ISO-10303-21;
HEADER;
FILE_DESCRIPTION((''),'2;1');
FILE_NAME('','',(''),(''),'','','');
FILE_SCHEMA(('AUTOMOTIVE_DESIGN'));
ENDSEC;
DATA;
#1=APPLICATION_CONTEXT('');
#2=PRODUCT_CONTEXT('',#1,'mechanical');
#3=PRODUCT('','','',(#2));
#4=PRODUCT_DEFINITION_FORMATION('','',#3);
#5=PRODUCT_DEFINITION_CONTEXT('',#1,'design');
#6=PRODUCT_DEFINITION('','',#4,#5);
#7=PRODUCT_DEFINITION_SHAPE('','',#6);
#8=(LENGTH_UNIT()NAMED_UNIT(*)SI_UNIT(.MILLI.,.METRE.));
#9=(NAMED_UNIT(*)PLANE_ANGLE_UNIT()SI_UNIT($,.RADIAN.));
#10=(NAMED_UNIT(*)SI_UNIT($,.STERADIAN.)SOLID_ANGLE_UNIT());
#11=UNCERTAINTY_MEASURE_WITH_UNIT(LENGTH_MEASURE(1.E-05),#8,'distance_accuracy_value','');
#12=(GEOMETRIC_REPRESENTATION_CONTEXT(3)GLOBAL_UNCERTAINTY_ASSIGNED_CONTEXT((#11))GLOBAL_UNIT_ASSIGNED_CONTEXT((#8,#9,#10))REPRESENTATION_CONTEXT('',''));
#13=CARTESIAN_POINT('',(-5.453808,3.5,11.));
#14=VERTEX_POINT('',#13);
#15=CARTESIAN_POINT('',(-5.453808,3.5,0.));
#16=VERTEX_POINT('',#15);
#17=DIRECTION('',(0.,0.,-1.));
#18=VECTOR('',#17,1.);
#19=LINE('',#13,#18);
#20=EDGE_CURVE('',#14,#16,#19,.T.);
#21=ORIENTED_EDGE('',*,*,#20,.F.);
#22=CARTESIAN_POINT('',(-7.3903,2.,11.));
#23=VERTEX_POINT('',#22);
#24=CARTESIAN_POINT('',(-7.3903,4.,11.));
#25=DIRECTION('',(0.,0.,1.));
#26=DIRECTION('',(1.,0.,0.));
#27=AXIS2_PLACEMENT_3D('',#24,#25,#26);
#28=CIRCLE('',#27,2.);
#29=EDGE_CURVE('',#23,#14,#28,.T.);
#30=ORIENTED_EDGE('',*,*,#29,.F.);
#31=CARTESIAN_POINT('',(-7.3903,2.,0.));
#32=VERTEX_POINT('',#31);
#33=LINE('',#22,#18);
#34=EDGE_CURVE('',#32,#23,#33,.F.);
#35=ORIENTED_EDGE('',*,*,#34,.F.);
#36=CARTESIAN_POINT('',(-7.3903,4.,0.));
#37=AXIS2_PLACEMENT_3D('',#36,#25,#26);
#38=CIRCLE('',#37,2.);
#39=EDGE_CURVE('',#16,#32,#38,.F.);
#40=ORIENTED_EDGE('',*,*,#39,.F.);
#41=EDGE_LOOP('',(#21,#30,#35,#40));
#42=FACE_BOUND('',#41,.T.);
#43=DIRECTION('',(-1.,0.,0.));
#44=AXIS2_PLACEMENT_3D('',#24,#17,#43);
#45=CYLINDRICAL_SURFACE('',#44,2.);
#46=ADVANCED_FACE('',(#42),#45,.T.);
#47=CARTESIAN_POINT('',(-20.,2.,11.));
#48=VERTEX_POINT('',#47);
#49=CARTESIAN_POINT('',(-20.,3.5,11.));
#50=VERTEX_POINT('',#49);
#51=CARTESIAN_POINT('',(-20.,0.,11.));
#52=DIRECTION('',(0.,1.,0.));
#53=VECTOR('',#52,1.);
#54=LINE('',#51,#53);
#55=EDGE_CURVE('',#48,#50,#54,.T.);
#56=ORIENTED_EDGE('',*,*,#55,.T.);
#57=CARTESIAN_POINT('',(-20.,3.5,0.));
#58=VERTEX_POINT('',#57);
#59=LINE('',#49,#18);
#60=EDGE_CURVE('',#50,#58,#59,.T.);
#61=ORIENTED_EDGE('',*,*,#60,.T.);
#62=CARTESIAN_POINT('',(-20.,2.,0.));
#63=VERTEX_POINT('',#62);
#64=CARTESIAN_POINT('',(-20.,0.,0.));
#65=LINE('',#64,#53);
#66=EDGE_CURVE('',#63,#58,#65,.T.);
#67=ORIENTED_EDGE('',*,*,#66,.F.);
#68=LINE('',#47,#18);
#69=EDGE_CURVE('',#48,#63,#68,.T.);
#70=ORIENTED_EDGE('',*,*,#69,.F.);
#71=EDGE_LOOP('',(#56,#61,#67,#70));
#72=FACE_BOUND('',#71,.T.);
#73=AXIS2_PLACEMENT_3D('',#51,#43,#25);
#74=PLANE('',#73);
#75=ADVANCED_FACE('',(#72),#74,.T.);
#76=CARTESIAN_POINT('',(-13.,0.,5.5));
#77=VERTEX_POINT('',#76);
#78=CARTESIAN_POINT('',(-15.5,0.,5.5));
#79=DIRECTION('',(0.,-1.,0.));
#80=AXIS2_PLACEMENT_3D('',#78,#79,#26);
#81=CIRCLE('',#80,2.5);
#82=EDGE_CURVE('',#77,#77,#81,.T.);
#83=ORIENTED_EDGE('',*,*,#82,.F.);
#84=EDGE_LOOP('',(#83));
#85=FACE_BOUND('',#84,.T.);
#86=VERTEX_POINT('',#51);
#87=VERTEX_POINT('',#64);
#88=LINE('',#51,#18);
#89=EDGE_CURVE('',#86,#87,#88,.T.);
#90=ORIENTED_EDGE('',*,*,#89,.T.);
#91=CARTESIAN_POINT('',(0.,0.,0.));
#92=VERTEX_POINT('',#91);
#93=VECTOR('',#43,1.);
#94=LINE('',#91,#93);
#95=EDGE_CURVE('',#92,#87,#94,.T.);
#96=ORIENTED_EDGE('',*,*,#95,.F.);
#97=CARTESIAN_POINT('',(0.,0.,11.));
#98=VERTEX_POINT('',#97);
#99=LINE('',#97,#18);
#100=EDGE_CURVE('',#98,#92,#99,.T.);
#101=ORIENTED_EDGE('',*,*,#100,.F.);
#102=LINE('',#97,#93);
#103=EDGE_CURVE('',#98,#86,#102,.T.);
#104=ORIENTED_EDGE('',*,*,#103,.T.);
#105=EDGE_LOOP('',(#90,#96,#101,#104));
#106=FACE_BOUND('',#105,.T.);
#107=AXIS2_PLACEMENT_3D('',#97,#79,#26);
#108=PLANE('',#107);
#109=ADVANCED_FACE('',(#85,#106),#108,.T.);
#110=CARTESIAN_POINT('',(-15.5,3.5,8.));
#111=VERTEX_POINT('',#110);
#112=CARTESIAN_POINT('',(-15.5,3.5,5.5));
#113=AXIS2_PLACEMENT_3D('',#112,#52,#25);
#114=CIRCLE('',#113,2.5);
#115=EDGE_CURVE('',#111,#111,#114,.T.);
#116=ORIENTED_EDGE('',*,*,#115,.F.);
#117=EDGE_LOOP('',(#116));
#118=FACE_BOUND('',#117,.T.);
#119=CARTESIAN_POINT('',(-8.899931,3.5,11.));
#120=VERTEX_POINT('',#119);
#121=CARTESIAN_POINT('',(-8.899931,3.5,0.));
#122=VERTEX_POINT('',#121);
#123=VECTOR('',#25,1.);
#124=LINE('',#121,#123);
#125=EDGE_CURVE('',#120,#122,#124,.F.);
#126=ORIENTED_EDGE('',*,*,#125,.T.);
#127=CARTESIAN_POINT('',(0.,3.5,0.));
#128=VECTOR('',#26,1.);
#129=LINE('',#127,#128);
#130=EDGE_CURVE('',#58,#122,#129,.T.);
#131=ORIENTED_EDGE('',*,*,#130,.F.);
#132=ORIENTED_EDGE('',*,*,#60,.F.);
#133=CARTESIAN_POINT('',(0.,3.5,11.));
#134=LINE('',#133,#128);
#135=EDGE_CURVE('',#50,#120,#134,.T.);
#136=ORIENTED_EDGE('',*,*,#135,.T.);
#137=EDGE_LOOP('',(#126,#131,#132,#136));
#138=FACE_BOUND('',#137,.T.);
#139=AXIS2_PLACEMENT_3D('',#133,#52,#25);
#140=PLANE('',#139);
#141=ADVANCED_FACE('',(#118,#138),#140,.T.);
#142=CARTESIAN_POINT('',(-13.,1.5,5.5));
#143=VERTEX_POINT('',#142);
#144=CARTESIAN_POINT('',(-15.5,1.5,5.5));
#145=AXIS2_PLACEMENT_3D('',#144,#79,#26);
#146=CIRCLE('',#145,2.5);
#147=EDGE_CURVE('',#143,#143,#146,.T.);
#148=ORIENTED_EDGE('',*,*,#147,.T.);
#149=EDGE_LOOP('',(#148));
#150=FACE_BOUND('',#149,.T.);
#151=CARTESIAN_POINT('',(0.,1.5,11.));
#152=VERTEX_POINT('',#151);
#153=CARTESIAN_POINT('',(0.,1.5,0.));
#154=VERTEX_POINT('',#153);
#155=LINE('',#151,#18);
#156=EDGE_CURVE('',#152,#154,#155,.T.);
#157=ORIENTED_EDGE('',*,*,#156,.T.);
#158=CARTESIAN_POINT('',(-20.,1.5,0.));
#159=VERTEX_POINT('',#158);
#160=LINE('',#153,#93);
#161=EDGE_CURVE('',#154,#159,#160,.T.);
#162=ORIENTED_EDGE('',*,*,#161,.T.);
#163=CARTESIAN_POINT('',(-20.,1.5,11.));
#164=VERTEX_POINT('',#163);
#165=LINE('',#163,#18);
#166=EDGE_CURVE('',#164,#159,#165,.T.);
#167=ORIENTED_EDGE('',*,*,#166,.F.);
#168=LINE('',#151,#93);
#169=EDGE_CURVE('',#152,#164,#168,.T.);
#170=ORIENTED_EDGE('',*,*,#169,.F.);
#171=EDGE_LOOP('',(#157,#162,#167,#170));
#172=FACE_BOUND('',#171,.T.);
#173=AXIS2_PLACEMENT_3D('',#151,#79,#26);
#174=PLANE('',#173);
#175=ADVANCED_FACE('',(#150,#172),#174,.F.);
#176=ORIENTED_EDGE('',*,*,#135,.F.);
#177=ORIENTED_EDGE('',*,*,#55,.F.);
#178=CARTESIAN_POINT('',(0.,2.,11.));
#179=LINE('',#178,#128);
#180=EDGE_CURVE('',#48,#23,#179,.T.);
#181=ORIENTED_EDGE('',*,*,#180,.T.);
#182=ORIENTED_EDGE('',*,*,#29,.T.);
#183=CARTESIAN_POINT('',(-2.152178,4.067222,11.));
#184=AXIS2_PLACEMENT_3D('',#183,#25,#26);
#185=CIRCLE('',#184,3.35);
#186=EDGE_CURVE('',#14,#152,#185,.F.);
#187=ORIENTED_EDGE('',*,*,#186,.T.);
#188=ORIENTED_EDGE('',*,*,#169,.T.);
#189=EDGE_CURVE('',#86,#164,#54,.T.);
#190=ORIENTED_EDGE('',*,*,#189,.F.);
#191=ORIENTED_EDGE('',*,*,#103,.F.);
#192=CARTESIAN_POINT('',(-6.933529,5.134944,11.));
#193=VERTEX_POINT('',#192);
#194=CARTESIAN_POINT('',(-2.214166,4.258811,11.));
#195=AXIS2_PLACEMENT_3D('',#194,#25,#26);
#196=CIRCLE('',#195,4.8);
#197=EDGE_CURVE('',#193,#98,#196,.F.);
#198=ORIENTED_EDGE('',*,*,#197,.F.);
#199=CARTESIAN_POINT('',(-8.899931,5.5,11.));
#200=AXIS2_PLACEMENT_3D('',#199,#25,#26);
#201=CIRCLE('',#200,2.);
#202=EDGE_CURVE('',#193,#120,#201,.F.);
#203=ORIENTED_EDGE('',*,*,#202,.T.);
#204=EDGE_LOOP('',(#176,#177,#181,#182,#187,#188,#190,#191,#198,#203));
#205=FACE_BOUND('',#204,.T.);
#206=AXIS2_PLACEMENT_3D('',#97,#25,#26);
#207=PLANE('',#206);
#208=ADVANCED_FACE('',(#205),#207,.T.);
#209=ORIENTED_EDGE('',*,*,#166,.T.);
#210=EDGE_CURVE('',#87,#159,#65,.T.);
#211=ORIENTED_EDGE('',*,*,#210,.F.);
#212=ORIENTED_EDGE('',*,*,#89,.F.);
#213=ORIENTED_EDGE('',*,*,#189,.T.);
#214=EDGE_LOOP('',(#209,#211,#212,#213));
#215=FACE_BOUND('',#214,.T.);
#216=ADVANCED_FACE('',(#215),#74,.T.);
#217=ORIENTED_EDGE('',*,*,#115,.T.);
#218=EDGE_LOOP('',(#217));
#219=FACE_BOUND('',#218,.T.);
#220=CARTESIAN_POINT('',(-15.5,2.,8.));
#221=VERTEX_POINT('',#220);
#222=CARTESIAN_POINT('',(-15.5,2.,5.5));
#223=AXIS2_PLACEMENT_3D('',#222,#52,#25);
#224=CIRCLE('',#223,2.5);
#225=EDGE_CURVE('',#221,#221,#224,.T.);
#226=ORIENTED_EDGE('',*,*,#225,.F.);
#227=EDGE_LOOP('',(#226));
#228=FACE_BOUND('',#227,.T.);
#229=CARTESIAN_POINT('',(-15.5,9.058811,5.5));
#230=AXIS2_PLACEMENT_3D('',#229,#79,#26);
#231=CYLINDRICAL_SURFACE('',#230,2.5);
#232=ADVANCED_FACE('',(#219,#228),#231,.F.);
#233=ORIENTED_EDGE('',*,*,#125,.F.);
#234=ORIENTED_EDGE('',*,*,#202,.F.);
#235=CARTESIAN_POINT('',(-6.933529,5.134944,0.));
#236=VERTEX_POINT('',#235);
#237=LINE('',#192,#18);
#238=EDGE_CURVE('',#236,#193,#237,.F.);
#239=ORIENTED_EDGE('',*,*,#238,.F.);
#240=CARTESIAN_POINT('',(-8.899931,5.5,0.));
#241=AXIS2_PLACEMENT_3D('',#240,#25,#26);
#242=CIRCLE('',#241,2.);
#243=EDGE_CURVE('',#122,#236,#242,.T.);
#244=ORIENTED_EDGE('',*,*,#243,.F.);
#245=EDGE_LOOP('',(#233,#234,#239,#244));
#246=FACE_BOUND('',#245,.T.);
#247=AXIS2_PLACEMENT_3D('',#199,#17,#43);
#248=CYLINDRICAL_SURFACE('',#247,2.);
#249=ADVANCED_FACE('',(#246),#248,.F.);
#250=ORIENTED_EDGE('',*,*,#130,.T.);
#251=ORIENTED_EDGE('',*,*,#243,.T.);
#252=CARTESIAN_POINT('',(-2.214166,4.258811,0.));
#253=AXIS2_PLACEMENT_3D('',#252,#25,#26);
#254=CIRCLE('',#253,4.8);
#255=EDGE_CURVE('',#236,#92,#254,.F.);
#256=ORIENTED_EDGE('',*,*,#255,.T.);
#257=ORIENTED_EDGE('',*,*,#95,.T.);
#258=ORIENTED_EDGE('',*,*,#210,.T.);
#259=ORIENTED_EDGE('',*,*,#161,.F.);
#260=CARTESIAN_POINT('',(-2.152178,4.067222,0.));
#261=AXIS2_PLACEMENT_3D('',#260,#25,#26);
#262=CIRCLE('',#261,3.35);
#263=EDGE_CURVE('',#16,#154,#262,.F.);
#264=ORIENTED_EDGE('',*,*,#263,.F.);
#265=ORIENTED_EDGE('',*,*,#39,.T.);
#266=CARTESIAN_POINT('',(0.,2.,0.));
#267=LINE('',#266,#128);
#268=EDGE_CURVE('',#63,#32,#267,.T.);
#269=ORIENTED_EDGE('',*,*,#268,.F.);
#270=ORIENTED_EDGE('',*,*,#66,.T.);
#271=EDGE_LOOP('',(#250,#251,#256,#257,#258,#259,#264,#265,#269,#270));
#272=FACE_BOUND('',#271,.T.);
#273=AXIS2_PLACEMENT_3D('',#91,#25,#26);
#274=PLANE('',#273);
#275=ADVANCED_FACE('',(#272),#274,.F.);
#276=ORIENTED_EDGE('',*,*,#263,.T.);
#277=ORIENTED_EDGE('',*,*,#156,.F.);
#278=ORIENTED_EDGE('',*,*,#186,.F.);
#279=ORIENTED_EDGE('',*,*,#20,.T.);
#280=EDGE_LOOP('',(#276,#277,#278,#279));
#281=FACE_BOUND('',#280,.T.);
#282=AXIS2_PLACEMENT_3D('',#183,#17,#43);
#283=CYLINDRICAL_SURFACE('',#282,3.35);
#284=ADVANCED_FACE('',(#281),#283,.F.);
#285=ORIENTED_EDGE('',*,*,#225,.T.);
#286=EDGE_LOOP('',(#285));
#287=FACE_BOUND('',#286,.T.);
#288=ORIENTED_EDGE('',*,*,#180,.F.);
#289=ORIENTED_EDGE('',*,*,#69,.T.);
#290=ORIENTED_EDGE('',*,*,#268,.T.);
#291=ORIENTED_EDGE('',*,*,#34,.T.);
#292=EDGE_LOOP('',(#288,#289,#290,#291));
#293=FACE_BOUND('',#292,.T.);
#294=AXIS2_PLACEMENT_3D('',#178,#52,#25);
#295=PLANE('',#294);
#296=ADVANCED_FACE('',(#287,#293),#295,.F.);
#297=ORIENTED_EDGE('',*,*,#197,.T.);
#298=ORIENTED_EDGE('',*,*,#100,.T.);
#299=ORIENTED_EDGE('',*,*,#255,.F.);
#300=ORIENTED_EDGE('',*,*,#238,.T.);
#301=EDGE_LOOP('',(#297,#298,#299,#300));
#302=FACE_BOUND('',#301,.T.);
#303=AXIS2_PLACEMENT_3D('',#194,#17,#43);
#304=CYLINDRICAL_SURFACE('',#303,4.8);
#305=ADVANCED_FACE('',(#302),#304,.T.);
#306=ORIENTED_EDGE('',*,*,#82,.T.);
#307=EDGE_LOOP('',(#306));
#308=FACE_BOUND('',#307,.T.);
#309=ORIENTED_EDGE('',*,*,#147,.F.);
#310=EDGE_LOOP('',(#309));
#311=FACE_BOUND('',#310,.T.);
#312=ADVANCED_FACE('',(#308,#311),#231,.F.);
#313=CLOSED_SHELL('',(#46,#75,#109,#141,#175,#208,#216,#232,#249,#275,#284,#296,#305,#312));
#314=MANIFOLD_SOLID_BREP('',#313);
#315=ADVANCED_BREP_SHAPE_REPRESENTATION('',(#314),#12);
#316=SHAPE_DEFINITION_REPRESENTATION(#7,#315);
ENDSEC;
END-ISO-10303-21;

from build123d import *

# Parameters (mm, degrees)
SKETCH1_W           = 14.546192004
SKETCH1_H           = 1.5
SKETCH1_W_2         = 20
BOSS_EXTRUDE1_DEPTH = 11
SKETCH2_R           = 2.5
CUT_EXTRUDE1_DEPTH  = 25.55732176
FILLET1_R           = 2


with BuildPart() as part:
    # Sketch1 → Boss-Extrude1 (new body)
    with BuildSketch(Plane.XY):
        with Locations((-12.726903998, 2.75)):
            Rectangle(SKETCH1_W, SKETCH1_H)
        with BuildLine():
            Line((0, 1.5), (0, 0))
            ThreePointArc((0, 0), (-0.056155977, 8.546349982), (-6.953807996, 3.5))
            Line((-6.953807996, 3.5), (-5.453807996, 3.5))
            ThreePointArc((-5.453807996, 3.5), (-0.998787688, 7.212407275), (0, 1.5))
        make_face()
        with Locations((-10, 0.75)):
            Rectangle(SKETCH1_W_2, SKETCH1_H)
    extrude(amount=BOSS_EXTRUDE1_DEPTH)

    # Sketch2 → Cut-Extrude1 (cut, through all)
    with BuildSketch(Plane(origin=(0, 0, 0), x_dir=(-1, 0, 0), z_dir=(0, -1, 0))):
        with Locations(Location((15.5, -5.5, 0), (0, 0, 270))):
            Circle(SKETCH2_R)
    extrude(amount=-CUT_EXTRUDE1_DEPTH, mode=Mode.SUBTRACT)

    # Fillet1
    # the kernel refuses this fillet: 2 mm, written as the material it adds along each edge
    with BuildSketch(Plane(origin=(-6.953807996, 3.5, 0), x_dir=(-1, 0, 0), z_dir=(0, 0, 1))) as fillet1_piece_1:
        with BuildLine():
            CenterArc((1.946122673, -2), FILLET1_R, 90, 79.482966368)
            ThreePointArc((-0.0202787, -1.634944336), (0.059988825, -0.818341988), (0, 0))
            Line((0, 0), (1.946122673, 0))
        make_face()
    extrude(amount=11)
    # the kernel refuses this fillet: 2 mm, written as the material it takes off along each edge
    with BuildSketch(Plane(origin=(-5.453807996, 2, -4.841229183), x_dir=(-1, 0, 0), z_dir=(0, 0, 1))) as fillet1_2_piece_1:
        with BuildLine():
            CenterArc((1.936491673, -2), FILLET1_R, 90, 75.522487814)
            Line((0, -1.5), (0, 0))
            Line((0, 0), (1.936491673, 0))
        make_face()
    extrude(amount=20.682458366, mode=Mode.SUBTRACT)


solid = part.part
